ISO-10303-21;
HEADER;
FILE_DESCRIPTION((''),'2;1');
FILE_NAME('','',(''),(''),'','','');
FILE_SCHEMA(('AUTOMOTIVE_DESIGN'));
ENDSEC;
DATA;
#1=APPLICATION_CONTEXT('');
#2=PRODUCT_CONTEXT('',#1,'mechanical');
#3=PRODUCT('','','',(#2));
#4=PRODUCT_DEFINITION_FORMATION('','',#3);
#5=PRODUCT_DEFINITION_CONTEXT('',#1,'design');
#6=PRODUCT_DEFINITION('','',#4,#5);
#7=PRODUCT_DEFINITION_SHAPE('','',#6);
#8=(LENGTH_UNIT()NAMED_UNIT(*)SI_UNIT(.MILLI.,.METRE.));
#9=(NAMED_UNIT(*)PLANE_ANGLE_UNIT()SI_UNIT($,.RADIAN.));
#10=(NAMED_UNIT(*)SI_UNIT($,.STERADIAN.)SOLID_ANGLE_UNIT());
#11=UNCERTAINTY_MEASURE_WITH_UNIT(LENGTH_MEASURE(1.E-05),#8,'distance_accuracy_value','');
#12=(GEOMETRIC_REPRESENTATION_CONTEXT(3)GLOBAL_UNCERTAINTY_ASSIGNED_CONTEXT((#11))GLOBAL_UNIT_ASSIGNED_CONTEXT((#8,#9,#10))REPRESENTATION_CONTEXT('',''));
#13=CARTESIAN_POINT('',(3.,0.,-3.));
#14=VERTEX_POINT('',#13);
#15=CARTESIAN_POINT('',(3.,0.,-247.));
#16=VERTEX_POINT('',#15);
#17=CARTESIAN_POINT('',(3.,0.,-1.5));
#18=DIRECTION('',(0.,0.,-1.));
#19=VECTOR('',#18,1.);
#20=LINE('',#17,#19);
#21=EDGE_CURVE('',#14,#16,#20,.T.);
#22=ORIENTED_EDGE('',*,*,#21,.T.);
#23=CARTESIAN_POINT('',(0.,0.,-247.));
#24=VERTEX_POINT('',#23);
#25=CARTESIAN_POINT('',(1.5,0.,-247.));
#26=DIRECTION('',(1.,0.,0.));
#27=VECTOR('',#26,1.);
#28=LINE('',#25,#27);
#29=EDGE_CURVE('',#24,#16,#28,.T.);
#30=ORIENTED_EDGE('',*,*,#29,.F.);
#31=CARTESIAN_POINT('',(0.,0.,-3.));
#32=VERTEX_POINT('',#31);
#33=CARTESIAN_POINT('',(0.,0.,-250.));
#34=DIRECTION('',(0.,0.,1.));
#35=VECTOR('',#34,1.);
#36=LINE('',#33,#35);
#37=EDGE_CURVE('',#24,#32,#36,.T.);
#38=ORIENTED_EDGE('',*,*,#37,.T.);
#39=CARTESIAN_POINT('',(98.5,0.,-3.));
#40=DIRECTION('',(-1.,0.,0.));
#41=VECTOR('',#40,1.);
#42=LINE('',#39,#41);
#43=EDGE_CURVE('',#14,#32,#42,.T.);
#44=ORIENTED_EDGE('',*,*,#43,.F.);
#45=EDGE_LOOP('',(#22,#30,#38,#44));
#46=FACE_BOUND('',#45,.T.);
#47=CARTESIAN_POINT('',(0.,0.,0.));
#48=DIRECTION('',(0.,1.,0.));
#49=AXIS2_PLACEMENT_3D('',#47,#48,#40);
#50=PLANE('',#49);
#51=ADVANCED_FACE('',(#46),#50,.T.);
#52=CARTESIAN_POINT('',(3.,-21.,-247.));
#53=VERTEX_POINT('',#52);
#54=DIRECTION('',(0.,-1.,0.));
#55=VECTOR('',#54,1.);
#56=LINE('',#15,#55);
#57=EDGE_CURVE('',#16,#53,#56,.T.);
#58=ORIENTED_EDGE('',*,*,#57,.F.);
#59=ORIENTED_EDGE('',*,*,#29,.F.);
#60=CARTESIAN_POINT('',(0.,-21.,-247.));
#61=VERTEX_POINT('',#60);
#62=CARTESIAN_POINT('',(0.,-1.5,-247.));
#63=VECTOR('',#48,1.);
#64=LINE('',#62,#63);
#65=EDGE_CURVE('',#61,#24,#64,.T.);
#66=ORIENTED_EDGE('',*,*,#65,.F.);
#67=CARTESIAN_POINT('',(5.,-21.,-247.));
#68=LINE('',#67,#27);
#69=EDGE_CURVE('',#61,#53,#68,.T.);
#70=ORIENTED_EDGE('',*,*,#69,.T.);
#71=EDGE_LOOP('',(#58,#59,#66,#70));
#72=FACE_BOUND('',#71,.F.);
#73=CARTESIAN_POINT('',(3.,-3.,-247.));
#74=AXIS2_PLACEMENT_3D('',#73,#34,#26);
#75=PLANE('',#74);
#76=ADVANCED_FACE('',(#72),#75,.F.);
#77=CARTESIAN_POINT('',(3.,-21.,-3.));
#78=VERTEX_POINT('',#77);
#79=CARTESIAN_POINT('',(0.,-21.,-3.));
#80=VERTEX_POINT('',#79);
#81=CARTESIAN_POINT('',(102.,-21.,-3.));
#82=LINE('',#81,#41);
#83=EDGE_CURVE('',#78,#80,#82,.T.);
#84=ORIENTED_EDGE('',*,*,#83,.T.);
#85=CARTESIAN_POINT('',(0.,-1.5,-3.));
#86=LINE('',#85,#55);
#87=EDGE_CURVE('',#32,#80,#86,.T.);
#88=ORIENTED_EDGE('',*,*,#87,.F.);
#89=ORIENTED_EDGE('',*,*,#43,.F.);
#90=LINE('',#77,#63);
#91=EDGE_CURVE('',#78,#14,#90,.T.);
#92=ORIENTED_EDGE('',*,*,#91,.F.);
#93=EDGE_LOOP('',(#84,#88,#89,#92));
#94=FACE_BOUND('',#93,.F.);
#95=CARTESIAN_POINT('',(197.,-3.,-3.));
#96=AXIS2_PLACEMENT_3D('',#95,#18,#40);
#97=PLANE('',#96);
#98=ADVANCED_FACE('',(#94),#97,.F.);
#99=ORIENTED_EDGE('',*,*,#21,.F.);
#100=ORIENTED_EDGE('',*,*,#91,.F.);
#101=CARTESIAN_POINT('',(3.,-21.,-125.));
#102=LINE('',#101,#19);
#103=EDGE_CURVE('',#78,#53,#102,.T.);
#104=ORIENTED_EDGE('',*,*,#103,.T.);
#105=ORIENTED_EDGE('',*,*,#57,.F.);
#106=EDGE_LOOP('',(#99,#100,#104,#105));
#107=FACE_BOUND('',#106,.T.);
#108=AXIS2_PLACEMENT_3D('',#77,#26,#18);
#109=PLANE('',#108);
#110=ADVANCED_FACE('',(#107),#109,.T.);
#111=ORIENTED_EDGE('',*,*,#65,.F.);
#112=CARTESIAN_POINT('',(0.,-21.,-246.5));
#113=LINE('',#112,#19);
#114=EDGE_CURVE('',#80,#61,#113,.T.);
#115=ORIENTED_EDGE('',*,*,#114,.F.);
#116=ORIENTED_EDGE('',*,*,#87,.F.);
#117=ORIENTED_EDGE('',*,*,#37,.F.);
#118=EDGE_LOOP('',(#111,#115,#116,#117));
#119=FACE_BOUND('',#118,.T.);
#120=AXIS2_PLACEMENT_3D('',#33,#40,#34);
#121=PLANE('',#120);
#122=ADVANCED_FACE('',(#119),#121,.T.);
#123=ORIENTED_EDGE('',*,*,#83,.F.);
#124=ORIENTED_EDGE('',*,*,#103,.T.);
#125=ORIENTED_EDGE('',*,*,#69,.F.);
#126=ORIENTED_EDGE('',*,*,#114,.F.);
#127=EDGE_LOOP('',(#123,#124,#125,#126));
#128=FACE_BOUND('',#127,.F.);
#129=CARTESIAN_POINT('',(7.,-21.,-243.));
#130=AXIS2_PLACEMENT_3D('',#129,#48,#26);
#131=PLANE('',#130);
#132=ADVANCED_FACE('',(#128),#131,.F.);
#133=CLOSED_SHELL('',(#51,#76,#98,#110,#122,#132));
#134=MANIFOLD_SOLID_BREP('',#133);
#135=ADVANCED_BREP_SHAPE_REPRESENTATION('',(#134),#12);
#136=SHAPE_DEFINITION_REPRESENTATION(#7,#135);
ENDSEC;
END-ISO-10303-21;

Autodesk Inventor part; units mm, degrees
ref_plane "YZ Plane" through (0, 0, 0) normal (1, 0, 0) x (0, 1, 0)
ref_plane "XZ Plane" through (0, 0, 0) normal (0, 1, 0) x (-1, 0, 0)
ref_plane "XY Plane" through (0, 0, 0) normal (0, 0, 1) x (1, 0, 0)
sketch "block" plane through (0, 0, 0) normal (0, 1, 0) x (-1, 0, 0)
  line L0 (0, 0) -> (-200, 0)
  line L1 (-200, 0) -> (-200, -250)
  line L2 (-200, -250) -> (0, -250)
  line L3 (0, -250) -> (0, 0)
  dimension "d31" = 200
  dimension "d32" = 250
extrude "ext_block" add sketch "block" against normal blind 24
shell "Shell2" thickness 3 removed faces 0
sketch "lines_base" plane through (0, 0, 0) normal (0, 1, 0) x (-1, 0, 0)
  line L0 (0, 0) -> (-200, 0)
  line L1 (-200, 0) -> (-200, -250)
  line L2 (-200, -250) -> (0, -250)
  line L3 (0, -250) -> (0, 0)
  circle A0 centre (-65, -60) radius 6
  circle A1 centre (-125, -80) radius 6
  circle A2 centre (-65, -60) radius 12.5
  circle A3 centre (-65, -60) radius 8.5
  circle A4 centre (-125, -80) radius 8.5
  circle A5 centre (-125, -80) radius 12.5
  circle A6 centre (-175, -125) radius 3
  line L4 (-175, -125) -> (-175, -209)
  line L5 (-175, -125) -> (-91, -125) construction
  circle A7 centre (-175, -139) radius 3
  circle A8 centre (-175, -153) radius 3
  circle A9 centre (-175, -167) radius 3
  circle A10 centre (-175, -181) radius 3
  circle A11 centre (-175, -195) radius 3
  circle A12 centre (-175, -209) radius 3
  circle A13 centre (-95, -185) radius 2.5
  circle A14 centre (-95, -185) radius 5
  point P0 (-200, -125)
  dimension "d0" = 200
  dimension "d1" = 250
  dimension "d2" = 12
  dimension "d3" = 12
  dimension "d4" = 25
  dimension "d5" = 17
  dimension "d6" = 17
  dimension "d7" = 25
  dimension "d8" = 75
  dimension "d9" = 80
  dimension "d10" = 65
  dimension "d11" = 60
  dimension "d12" = 6
  dimension "d13" = 84
  dimension "d14" = 90
  dimension "d15" = 25
  dimension "d16" = 125
  dimension "d19" = 14
  dimension "d24" = 5
  dimension "d25" = 10
  dimension "d26" = 65
  dimension "d27" = 95
extrude "holes" cut sketch "lines_base" against normal up to surface (3 mm away) contours A0 | A1 | A6 | A7 L4 | L4 A7 | A8 L4 | L4 A8 | A9 L4 | L4 A9 | A10 L4 | L4 A10 | A11 L4 | L4 A11 | A12 | A13
sketch "Sketch4" plane through (200, 0, -250) normal (0, 0, -1) x (-1, 0, 0)
  line L0 (188, -4) -> (169, -4)
  line L1 (169, -4) -> (169, -17)
  line L2 (169, -17) -> (188, -17)
  line L3 (188, -17) -> (188, -4)
  line L4 (0, 0) -> (200, 0) projected
  line L5 (200, 0) -> (200, -24) projected
  dimension "d40" = 19
  dimension "d41" = 13
  dimension "d42" = 4
  dimension "d43" = 12
extrude "pwr_button_hole" cut sketch "Sketch4" against normal up to surface (3 mm away)
ref_plane "Work Plane1" through (7, -21, -243) normal (0, 1, 0) x (1, 0, 0)
sketch "Sketch5" plane through (7, -21, -243) normal (0, 1, 0) x (1, 0, 0)
  line L0 (-20.9366, 21.7948) -> (229.9216, 21.7948)
  line L1 (229.9216, 21.7948) -> (229.9216, -260.9184)
  line L2 (229.9216, -260.9184) -> (-20.9366, -260.9184)
  line L3 (-20.9366, -260.9184) -> (-20.9366, 21.7948)
  point P0 (-7, -243)
extrude "back_cover_cut" cut sketch "Sketch5" against normal through all
sketch "Sketch10" plane through (197, -3, -3) normal (0, 0, -1) x (-1, 0, 0)
  line L0 (-36.7403, 38.8931) -> (239.3233, 38.8931)
  line L1 (239.3233, 38.8931) -> (239.3233, -48.8023)
  line L2 (239.3233, -48.8023) -> (-36.7403, -48.8023)
  line L3 (-36.7403, -48.8023) -> (-36.7403, 38.8931)
  point P0 (197, 3)
extrude "Extrusion8" cut sketch "Sketch10" against normal blind 10
sketch "Sketch11" plane through (3, -3, -247) normal (0, 0, 1) x (1, 0, 0)
  line L0 (-15.7564, 16.4959) -> (212.749, 16.4959)
  line L1 (212.749, 16.4959) -> (212.749, -33.4204)
  line L2 (212.749, -33.4204) -> (-15.7564, -33.4204)
  line L3 (-15.7564, -33.4204) -> (-15.7564, 16.4959)
  point P0 (-3, 3)
extrude "Extrusion9" cut sketch "Sketch11" against normal blind 10
sketch "Sketch12" plane through (3, -21, -3) normal (1, 0, 0) x (0, 0, -1)
  line L0 (-56.7986, 58.1599) -> (268.5812, 58.1599)
  line L1 (268.5812, 58.1599) -> (268.5812, -16.8994)
  line L2 (268.5812, -16.8994) -> (-56.7986, -16.8994)
  line L3 (-56.7986, -16.8994) -> (-56.7986, 58.1599)
  point P0 (-3, 21)
extrude "Extrusion10" cut sketch "Sketch12" along normal through all
properties part number "back_top" material "Glass"
